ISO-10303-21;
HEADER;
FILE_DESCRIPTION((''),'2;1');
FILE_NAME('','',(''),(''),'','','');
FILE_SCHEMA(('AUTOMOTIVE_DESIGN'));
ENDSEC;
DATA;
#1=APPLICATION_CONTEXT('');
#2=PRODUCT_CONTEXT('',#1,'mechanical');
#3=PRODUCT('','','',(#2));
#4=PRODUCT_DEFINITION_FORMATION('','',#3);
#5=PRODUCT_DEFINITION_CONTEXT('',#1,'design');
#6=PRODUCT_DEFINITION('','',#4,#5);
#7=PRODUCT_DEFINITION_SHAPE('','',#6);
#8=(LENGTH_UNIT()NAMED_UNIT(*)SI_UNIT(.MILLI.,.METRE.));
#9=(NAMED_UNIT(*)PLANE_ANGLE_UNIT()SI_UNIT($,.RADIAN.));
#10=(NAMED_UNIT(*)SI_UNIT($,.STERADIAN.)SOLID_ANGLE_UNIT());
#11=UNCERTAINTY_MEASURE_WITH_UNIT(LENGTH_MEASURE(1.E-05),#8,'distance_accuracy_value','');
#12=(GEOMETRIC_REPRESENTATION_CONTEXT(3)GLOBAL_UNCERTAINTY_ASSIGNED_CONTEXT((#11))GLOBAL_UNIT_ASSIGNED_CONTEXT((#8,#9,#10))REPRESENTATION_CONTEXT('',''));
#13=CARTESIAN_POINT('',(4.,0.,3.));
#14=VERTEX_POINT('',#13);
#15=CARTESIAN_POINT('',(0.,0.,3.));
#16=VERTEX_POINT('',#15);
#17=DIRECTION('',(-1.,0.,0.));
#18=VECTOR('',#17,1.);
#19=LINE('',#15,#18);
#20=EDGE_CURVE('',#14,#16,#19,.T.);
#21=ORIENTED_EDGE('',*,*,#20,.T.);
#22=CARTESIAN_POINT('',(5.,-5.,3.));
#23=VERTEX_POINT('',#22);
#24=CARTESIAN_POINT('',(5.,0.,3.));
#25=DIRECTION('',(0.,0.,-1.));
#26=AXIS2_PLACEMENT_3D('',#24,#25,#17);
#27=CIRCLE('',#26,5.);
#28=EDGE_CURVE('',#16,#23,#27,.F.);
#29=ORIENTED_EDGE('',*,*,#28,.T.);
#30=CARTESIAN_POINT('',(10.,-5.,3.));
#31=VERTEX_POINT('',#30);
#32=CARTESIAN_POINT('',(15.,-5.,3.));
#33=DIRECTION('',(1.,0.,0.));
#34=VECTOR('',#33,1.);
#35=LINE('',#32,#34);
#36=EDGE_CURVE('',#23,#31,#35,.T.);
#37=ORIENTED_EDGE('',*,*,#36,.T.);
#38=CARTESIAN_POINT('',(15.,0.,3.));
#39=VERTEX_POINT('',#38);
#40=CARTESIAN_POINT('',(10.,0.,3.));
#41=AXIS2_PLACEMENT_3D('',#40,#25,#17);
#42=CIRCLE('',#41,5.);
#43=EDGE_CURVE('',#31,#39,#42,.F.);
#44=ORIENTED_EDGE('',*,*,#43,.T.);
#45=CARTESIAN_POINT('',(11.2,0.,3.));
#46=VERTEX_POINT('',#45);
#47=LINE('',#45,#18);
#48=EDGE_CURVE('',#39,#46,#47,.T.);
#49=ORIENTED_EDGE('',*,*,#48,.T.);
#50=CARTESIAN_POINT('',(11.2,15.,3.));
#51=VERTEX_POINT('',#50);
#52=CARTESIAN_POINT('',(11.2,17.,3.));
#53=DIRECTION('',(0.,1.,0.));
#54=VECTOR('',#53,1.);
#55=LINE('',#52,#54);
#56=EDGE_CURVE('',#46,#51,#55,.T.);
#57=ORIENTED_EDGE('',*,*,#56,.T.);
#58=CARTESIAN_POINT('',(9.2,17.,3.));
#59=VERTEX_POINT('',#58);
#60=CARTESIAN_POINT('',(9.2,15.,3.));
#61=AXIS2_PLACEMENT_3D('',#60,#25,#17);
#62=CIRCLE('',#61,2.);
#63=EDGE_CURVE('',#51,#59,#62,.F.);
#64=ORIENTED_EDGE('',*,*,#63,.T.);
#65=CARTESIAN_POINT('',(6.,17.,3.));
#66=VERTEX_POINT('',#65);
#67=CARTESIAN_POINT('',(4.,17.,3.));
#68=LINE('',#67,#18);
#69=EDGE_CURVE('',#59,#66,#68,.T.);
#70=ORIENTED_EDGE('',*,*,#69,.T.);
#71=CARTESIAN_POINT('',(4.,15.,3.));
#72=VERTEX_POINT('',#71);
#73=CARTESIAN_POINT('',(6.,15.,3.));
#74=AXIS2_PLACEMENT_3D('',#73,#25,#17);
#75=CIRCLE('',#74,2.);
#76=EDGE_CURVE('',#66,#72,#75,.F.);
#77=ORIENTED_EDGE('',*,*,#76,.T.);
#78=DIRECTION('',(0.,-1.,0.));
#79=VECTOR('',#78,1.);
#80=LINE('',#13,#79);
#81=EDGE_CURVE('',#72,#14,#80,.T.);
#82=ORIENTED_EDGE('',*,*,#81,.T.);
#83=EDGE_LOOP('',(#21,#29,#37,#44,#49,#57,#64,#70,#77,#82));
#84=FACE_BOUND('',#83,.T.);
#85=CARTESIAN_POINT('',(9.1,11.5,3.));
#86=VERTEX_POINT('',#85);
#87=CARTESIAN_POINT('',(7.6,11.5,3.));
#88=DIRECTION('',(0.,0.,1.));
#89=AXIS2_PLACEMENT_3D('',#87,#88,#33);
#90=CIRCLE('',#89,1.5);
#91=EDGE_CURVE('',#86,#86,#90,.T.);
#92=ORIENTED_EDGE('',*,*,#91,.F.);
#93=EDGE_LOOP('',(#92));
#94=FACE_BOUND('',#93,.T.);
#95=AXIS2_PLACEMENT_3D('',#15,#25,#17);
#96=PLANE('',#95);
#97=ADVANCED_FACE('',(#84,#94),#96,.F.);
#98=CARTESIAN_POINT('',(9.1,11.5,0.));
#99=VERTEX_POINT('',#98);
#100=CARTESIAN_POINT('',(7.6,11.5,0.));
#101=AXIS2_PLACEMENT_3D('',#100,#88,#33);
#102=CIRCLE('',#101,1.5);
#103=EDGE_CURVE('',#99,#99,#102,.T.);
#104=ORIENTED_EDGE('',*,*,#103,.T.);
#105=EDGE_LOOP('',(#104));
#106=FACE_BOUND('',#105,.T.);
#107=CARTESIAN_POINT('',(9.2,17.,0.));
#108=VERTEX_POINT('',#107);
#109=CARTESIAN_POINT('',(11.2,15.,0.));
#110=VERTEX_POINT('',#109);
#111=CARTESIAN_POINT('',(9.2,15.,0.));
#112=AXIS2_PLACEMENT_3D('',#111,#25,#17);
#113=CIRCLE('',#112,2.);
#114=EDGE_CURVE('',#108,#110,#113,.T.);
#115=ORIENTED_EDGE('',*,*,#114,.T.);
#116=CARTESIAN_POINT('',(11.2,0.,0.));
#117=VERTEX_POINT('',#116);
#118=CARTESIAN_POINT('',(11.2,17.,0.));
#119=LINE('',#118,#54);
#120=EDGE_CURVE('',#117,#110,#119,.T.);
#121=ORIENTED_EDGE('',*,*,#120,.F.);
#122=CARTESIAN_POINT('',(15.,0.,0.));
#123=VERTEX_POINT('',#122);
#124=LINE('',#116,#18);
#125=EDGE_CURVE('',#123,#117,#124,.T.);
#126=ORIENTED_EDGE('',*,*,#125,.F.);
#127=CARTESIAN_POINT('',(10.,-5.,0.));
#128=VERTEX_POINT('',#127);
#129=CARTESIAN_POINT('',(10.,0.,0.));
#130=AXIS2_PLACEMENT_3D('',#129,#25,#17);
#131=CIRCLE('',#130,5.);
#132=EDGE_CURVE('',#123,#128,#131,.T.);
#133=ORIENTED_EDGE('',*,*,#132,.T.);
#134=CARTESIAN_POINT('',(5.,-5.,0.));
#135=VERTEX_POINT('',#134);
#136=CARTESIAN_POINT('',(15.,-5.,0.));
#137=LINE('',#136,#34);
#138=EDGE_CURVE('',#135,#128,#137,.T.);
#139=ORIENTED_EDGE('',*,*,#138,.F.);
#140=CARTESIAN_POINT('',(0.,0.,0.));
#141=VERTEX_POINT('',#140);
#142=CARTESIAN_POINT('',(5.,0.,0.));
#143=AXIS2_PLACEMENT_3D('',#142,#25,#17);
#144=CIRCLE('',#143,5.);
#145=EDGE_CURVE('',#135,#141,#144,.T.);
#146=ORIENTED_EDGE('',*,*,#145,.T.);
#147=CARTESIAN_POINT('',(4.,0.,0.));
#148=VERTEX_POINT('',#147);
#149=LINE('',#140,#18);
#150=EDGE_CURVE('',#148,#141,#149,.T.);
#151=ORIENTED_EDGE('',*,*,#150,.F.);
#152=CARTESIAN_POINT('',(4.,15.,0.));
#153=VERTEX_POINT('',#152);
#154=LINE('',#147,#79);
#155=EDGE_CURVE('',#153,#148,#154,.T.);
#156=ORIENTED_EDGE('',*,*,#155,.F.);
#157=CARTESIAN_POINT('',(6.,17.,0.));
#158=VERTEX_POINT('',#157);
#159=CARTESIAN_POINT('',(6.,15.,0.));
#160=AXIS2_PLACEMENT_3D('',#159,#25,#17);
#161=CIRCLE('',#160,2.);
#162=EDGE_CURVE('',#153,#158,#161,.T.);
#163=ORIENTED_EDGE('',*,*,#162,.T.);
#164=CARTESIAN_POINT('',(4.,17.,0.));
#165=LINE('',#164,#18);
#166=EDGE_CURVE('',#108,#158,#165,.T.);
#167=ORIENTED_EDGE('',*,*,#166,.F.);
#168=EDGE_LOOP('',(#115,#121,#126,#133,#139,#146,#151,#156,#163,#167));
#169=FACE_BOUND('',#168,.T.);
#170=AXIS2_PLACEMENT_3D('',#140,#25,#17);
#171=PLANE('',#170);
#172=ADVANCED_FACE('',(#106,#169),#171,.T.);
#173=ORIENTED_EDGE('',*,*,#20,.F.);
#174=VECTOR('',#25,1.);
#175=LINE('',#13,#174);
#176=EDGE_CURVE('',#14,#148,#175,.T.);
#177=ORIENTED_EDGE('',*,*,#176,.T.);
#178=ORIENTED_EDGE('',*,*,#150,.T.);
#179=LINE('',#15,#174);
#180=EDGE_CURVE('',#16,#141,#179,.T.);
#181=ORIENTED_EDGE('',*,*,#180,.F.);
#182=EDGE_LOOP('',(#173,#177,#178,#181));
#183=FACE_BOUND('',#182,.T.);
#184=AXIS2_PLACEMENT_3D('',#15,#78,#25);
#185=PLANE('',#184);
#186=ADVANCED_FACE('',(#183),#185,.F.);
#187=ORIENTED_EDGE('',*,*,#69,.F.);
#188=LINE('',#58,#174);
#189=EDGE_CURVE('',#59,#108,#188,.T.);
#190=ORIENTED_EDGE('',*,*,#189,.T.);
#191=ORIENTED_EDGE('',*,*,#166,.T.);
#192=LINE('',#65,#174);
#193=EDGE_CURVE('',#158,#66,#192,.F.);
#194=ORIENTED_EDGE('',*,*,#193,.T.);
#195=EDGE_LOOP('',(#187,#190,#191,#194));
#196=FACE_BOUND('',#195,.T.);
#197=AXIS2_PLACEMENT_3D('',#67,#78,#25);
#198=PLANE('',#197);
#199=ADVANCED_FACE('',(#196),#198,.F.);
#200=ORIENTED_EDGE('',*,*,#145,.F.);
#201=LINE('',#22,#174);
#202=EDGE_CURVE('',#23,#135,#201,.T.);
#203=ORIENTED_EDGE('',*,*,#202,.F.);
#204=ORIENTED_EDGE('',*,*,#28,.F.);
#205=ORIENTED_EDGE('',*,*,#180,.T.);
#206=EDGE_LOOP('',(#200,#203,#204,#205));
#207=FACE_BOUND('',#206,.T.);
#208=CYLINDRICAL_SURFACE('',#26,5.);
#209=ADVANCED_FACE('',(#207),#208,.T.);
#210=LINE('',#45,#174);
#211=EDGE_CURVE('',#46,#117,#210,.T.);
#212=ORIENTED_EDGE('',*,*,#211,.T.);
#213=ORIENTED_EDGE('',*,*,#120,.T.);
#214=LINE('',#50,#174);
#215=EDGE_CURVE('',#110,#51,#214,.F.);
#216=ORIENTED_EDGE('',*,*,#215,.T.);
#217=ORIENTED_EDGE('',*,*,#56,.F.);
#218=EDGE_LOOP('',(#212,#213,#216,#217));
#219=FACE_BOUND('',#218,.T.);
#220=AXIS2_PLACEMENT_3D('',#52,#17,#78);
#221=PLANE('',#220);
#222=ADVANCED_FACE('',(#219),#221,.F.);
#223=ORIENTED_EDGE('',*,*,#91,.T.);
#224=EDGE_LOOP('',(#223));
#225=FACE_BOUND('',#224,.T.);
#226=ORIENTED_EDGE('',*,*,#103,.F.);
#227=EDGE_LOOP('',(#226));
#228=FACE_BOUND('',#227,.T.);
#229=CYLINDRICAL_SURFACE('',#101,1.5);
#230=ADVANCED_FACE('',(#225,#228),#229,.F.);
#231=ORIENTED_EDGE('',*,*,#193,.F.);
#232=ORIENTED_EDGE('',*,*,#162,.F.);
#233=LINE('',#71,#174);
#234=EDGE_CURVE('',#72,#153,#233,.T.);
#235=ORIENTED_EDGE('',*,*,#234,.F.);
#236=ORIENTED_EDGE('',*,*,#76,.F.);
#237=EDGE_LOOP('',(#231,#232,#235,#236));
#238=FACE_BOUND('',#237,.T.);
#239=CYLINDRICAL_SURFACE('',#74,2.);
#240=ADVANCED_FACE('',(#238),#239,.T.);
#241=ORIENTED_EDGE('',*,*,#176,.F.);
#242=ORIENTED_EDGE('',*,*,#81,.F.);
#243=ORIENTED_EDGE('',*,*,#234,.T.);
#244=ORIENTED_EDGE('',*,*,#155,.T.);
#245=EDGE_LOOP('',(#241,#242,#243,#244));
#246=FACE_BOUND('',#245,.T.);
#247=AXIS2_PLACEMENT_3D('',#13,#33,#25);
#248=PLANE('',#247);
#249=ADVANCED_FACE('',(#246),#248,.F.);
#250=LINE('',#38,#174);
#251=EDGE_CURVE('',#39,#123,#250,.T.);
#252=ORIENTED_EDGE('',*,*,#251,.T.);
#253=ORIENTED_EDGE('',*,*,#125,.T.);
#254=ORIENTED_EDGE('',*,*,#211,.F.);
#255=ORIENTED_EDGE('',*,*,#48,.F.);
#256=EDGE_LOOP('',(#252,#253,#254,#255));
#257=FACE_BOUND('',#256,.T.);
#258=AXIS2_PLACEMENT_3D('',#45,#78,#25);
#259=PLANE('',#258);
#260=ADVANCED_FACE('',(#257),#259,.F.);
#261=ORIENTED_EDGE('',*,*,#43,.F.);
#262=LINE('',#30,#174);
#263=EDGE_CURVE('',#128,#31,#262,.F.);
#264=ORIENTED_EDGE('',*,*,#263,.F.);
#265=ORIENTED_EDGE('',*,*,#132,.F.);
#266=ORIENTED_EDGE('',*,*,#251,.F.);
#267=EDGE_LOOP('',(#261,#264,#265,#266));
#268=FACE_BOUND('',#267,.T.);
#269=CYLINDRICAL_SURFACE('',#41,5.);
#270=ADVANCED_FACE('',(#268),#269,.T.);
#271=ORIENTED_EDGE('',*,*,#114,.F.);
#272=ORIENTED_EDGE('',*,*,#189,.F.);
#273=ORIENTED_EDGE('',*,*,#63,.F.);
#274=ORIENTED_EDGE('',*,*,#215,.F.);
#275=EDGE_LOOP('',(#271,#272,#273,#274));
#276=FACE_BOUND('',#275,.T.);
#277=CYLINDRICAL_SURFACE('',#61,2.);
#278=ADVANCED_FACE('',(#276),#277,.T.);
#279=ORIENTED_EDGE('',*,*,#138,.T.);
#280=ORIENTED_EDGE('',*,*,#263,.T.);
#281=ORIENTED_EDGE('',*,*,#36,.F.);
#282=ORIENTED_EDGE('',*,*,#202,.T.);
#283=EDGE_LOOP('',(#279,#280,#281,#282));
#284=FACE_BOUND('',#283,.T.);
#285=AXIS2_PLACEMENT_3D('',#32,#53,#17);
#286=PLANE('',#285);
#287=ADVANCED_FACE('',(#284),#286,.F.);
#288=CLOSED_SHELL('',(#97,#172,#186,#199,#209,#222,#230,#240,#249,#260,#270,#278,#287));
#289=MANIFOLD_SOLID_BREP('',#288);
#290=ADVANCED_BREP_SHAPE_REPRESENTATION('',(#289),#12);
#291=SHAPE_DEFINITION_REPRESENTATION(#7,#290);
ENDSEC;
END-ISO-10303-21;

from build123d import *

# Parameters (mm, degrees)
RESSALTO_EXTRUS_O1_DEPTH = 3
ESBO_O2_R                = 1.5
CORTE_EXTRUS_O1_DEPTH    = 23.869193252
FILETE1_R                = 5
FILETE2_R                = 2


with BuildPart() as part:
    # Esboço1 → Ressalto-extrusão1 (new body)
    with BuildSketch(Plane.XY):
        Polygon((0, 0), (4, 0), (4, 17), (11.2, 17), (11.2, 0), (15, 0), (15, -5), (0, -5), align=None)
    extrude(amount=RESSALTO_EXTRUS_O1_DEPTH)

    # Esboço2 → Corte-extrusão1 (cut, through all)
    with BuildSketch(Plane.XY.offset(3)):
        with Locations((7.6, 11.5)):
            Circle(ESBO_O2_R)
    extrude(amount=-CORTE_EXTRUS_O1_DEPTH, mode=Mode.SUBTRACT)

    # Filete1
    filete1_edges = [part.edges().sort_by_distance(p)[0] for p in [
        (0, -5, 1.5),
        (15, -5, 1.5),
    ]]
    fillet(filete1_edges, radius=FILETE1_R - 0.0001)  # a hair under: the kernel refuses the full size

    # Filete2
    filete2_edges = [part.edges().sort_by_distance(p)[0] for p in [
        (4, 17, 1.5),
        (11.2, 17, 1.5),
    ]]
    fillet(filete2_edges, radius=FILETE2_R)


solid = part.part
